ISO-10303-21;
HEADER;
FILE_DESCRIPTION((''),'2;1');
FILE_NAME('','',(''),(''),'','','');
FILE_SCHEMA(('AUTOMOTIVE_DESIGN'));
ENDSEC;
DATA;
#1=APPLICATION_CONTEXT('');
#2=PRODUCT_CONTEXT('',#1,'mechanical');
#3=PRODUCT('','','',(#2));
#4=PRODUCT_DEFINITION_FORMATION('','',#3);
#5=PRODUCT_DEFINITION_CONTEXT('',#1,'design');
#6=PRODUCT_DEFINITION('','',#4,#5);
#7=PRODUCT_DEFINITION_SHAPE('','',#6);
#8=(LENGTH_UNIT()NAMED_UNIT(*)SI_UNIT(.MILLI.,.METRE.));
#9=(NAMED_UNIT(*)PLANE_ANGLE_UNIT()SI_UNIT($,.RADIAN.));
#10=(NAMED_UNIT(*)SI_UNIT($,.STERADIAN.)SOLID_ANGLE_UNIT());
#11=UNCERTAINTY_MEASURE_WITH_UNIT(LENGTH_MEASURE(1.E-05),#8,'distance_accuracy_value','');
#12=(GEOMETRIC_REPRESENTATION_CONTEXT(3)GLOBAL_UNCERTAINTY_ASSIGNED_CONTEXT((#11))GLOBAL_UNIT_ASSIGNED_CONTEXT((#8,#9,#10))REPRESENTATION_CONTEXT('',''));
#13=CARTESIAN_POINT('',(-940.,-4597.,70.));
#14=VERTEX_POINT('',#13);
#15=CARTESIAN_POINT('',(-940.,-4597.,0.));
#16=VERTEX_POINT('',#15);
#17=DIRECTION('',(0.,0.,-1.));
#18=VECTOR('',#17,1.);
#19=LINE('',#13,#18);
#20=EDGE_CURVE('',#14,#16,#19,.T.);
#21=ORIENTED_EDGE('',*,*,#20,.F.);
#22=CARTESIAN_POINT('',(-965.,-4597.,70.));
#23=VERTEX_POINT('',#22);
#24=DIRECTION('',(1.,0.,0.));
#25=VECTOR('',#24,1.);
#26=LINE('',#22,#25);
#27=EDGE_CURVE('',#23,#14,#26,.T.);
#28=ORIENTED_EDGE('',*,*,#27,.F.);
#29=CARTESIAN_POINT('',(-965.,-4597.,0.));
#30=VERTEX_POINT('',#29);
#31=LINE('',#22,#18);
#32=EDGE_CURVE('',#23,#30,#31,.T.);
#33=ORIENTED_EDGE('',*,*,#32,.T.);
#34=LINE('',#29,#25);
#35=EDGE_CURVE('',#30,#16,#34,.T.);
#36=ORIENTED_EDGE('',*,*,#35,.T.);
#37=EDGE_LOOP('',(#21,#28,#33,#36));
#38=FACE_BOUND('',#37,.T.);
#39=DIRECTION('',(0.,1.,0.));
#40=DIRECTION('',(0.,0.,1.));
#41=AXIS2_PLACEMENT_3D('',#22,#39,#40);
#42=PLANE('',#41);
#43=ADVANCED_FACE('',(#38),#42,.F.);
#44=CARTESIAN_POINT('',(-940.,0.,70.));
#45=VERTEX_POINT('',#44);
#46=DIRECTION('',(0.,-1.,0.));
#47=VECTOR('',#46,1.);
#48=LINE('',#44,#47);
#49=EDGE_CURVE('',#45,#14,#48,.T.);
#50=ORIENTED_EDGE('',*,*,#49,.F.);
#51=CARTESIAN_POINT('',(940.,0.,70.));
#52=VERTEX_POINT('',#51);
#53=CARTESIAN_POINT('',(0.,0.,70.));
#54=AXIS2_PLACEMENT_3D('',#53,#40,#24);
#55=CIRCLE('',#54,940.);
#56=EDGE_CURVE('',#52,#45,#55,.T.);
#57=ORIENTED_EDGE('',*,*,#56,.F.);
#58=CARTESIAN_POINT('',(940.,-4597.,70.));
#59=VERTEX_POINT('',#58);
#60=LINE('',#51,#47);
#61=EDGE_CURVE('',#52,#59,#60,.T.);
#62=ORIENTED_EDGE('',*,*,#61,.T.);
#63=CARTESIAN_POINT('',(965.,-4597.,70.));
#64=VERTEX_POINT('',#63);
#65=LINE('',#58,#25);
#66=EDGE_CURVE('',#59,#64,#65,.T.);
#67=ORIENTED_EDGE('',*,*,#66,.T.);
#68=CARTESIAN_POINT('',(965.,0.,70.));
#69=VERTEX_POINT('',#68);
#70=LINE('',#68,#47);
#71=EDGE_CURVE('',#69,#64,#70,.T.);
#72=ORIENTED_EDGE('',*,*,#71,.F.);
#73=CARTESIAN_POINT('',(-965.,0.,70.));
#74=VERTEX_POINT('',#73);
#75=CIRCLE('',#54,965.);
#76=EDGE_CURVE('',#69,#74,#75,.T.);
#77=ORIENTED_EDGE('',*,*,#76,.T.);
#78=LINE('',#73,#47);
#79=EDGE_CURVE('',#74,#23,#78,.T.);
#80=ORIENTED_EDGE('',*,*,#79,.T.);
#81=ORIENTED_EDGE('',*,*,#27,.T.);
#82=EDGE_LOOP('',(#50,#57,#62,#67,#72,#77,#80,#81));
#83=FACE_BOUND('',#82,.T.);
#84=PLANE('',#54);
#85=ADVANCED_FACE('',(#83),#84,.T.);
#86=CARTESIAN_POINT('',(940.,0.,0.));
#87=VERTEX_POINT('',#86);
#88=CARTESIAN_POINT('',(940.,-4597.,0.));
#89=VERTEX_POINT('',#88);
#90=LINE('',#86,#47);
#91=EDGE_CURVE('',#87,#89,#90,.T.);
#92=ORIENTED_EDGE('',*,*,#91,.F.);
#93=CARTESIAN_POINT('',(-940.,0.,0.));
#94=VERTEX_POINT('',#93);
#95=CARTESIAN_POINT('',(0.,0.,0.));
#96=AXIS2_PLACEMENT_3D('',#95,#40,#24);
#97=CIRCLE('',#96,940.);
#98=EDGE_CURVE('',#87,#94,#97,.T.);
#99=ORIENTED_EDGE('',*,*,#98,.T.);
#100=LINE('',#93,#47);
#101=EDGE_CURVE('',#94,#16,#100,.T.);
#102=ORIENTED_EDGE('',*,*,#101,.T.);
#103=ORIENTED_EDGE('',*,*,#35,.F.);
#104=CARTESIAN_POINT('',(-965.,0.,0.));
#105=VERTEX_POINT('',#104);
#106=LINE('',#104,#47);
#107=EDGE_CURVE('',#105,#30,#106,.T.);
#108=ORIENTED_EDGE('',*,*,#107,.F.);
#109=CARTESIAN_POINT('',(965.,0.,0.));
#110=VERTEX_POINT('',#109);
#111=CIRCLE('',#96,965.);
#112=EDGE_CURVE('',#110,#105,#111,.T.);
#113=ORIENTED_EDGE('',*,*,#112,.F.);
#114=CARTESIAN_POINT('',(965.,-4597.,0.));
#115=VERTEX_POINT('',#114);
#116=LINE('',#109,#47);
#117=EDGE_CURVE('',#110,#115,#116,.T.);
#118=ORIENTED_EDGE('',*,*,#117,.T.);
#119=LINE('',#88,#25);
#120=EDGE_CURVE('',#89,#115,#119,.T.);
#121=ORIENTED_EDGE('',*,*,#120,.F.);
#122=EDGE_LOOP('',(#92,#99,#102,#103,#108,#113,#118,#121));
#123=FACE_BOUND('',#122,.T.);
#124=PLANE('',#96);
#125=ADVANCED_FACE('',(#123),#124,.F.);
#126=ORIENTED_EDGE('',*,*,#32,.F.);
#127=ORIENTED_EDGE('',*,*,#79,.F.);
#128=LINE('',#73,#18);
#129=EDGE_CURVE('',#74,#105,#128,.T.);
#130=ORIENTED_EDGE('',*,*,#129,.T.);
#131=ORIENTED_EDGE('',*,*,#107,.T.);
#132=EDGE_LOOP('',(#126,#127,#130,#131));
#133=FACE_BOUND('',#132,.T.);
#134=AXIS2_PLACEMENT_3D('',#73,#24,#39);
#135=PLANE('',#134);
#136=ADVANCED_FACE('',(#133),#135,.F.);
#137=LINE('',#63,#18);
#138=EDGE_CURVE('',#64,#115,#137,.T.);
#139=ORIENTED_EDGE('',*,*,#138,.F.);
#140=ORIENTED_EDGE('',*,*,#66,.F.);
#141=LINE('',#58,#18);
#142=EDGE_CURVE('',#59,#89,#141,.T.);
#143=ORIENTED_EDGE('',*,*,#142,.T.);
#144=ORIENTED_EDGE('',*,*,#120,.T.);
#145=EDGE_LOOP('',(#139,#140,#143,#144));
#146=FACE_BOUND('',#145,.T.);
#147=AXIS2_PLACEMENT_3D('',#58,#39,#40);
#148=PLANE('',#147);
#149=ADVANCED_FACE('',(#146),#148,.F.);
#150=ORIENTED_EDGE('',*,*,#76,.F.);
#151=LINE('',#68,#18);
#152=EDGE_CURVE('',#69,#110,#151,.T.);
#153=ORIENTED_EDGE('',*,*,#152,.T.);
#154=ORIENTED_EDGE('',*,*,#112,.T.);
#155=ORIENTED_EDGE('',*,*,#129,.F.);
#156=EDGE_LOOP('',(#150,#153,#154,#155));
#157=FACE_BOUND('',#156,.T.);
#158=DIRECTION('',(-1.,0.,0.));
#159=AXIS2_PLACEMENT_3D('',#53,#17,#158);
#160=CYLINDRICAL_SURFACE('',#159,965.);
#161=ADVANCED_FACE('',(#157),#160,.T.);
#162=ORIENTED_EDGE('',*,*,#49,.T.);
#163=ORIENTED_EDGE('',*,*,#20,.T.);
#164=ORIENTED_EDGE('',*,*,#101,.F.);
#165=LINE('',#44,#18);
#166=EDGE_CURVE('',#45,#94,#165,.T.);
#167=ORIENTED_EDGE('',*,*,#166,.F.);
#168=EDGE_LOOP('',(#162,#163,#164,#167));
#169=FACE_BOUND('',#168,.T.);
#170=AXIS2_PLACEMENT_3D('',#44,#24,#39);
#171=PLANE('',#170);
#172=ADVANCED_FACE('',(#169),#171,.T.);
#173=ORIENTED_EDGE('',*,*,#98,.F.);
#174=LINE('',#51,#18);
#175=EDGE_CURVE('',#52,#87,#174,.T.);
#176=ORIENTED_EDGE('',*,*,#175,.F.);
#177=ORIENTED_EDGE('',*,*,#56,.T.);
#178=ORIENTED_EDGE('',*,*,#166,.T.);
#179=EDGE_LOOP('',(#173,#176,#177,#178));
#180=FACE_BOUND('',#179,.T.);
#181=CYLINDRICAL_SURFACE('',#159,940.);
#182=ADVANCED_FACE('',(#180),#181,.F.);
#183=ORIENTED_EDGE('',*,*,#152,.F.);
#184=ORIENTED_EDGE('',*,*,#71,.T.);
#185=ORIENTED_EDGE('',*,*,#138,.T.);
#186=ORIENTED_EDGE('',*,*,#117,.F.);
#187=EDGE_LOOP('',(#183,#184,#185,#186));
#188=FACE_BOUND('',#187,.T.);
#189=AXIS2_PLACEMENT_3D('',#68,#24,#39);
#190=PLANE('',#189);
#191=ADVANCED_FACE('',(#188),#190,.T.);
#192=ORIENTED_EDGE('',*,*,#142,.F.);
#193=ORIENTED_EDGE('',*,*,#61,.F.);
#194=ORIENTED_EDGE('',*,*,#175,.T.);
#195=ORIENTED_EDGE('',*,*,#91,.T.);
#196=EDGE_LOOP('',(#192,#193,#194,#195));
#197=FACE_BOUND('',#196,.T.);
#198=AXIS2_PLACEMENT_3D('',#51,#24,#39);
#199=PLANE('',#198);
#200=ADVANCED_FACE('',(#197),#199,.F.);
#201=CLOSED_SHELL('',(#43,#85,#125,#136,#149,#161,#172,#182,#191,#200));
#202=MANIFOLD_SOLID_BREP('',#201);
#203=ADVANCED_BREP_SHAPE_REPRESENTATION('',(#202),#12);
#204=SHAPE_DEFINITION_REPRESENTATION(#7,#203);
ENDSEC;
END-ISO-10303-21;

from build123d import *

# Parameters (mm, degrees)
SKETCH1_W             = 25
SKETCH1_H             = 4897
BOSS_EXTRUDE1_DEPTH   = 70
BOSS_EXTRUDE1_2_DEPTH = 70
BOSS_EXTRUDE1_3_DEPTH = 70


# Read off the part's stored shape, not the designer's step: Split1
with BuildPart() as part:
    # Sketch1 → Boss-Extrude1 (new body)
    with BuildSketch(Plane.XY):
        with Locations((-732.5, -2448.5)):
            Rectangle(SKETCH1_W, SKETCH1_H)
    extrude(amount=BOSS_EXTRUDE1_DEPTH)


with BuildPart() as body_2:
    # Sketch1 → Boss-Extrude1 2 (new body)
    with BuildSketch(Plane.XY):
        with Locations((732.5, -2448.5)):
            Rectangle(SKETCH1_W, SKETCH1_H)
    extrude(amount=BOSS_EXTRUDE1_2_DEPTH)


with BuildPart() as body_3:
    # Sketch1 → Boss-Extrude1 3 (new body)
    with BuildSketch(Plane.XY):
        with BuildLine():
            Line((940, 0), (940, -4597))
            Line((940, -4597), (965, -4597))
            Line((965, -4597), (965, 0))
            ThreePointArc((965, 0), (0, 965), (-965, 0))
            Line((-965, 0), (-965, -4597))
            Line((-965, -4597), (-940, -4597))
            Line((-940, -4597), (-940, 0))
            ThreePointArc((-940, 0), (0, 940), (940, 0))
        make_face()
    extrude(amount=BOSS_EXTRUDE1_3_DEPTH)


solid = body_3.part
